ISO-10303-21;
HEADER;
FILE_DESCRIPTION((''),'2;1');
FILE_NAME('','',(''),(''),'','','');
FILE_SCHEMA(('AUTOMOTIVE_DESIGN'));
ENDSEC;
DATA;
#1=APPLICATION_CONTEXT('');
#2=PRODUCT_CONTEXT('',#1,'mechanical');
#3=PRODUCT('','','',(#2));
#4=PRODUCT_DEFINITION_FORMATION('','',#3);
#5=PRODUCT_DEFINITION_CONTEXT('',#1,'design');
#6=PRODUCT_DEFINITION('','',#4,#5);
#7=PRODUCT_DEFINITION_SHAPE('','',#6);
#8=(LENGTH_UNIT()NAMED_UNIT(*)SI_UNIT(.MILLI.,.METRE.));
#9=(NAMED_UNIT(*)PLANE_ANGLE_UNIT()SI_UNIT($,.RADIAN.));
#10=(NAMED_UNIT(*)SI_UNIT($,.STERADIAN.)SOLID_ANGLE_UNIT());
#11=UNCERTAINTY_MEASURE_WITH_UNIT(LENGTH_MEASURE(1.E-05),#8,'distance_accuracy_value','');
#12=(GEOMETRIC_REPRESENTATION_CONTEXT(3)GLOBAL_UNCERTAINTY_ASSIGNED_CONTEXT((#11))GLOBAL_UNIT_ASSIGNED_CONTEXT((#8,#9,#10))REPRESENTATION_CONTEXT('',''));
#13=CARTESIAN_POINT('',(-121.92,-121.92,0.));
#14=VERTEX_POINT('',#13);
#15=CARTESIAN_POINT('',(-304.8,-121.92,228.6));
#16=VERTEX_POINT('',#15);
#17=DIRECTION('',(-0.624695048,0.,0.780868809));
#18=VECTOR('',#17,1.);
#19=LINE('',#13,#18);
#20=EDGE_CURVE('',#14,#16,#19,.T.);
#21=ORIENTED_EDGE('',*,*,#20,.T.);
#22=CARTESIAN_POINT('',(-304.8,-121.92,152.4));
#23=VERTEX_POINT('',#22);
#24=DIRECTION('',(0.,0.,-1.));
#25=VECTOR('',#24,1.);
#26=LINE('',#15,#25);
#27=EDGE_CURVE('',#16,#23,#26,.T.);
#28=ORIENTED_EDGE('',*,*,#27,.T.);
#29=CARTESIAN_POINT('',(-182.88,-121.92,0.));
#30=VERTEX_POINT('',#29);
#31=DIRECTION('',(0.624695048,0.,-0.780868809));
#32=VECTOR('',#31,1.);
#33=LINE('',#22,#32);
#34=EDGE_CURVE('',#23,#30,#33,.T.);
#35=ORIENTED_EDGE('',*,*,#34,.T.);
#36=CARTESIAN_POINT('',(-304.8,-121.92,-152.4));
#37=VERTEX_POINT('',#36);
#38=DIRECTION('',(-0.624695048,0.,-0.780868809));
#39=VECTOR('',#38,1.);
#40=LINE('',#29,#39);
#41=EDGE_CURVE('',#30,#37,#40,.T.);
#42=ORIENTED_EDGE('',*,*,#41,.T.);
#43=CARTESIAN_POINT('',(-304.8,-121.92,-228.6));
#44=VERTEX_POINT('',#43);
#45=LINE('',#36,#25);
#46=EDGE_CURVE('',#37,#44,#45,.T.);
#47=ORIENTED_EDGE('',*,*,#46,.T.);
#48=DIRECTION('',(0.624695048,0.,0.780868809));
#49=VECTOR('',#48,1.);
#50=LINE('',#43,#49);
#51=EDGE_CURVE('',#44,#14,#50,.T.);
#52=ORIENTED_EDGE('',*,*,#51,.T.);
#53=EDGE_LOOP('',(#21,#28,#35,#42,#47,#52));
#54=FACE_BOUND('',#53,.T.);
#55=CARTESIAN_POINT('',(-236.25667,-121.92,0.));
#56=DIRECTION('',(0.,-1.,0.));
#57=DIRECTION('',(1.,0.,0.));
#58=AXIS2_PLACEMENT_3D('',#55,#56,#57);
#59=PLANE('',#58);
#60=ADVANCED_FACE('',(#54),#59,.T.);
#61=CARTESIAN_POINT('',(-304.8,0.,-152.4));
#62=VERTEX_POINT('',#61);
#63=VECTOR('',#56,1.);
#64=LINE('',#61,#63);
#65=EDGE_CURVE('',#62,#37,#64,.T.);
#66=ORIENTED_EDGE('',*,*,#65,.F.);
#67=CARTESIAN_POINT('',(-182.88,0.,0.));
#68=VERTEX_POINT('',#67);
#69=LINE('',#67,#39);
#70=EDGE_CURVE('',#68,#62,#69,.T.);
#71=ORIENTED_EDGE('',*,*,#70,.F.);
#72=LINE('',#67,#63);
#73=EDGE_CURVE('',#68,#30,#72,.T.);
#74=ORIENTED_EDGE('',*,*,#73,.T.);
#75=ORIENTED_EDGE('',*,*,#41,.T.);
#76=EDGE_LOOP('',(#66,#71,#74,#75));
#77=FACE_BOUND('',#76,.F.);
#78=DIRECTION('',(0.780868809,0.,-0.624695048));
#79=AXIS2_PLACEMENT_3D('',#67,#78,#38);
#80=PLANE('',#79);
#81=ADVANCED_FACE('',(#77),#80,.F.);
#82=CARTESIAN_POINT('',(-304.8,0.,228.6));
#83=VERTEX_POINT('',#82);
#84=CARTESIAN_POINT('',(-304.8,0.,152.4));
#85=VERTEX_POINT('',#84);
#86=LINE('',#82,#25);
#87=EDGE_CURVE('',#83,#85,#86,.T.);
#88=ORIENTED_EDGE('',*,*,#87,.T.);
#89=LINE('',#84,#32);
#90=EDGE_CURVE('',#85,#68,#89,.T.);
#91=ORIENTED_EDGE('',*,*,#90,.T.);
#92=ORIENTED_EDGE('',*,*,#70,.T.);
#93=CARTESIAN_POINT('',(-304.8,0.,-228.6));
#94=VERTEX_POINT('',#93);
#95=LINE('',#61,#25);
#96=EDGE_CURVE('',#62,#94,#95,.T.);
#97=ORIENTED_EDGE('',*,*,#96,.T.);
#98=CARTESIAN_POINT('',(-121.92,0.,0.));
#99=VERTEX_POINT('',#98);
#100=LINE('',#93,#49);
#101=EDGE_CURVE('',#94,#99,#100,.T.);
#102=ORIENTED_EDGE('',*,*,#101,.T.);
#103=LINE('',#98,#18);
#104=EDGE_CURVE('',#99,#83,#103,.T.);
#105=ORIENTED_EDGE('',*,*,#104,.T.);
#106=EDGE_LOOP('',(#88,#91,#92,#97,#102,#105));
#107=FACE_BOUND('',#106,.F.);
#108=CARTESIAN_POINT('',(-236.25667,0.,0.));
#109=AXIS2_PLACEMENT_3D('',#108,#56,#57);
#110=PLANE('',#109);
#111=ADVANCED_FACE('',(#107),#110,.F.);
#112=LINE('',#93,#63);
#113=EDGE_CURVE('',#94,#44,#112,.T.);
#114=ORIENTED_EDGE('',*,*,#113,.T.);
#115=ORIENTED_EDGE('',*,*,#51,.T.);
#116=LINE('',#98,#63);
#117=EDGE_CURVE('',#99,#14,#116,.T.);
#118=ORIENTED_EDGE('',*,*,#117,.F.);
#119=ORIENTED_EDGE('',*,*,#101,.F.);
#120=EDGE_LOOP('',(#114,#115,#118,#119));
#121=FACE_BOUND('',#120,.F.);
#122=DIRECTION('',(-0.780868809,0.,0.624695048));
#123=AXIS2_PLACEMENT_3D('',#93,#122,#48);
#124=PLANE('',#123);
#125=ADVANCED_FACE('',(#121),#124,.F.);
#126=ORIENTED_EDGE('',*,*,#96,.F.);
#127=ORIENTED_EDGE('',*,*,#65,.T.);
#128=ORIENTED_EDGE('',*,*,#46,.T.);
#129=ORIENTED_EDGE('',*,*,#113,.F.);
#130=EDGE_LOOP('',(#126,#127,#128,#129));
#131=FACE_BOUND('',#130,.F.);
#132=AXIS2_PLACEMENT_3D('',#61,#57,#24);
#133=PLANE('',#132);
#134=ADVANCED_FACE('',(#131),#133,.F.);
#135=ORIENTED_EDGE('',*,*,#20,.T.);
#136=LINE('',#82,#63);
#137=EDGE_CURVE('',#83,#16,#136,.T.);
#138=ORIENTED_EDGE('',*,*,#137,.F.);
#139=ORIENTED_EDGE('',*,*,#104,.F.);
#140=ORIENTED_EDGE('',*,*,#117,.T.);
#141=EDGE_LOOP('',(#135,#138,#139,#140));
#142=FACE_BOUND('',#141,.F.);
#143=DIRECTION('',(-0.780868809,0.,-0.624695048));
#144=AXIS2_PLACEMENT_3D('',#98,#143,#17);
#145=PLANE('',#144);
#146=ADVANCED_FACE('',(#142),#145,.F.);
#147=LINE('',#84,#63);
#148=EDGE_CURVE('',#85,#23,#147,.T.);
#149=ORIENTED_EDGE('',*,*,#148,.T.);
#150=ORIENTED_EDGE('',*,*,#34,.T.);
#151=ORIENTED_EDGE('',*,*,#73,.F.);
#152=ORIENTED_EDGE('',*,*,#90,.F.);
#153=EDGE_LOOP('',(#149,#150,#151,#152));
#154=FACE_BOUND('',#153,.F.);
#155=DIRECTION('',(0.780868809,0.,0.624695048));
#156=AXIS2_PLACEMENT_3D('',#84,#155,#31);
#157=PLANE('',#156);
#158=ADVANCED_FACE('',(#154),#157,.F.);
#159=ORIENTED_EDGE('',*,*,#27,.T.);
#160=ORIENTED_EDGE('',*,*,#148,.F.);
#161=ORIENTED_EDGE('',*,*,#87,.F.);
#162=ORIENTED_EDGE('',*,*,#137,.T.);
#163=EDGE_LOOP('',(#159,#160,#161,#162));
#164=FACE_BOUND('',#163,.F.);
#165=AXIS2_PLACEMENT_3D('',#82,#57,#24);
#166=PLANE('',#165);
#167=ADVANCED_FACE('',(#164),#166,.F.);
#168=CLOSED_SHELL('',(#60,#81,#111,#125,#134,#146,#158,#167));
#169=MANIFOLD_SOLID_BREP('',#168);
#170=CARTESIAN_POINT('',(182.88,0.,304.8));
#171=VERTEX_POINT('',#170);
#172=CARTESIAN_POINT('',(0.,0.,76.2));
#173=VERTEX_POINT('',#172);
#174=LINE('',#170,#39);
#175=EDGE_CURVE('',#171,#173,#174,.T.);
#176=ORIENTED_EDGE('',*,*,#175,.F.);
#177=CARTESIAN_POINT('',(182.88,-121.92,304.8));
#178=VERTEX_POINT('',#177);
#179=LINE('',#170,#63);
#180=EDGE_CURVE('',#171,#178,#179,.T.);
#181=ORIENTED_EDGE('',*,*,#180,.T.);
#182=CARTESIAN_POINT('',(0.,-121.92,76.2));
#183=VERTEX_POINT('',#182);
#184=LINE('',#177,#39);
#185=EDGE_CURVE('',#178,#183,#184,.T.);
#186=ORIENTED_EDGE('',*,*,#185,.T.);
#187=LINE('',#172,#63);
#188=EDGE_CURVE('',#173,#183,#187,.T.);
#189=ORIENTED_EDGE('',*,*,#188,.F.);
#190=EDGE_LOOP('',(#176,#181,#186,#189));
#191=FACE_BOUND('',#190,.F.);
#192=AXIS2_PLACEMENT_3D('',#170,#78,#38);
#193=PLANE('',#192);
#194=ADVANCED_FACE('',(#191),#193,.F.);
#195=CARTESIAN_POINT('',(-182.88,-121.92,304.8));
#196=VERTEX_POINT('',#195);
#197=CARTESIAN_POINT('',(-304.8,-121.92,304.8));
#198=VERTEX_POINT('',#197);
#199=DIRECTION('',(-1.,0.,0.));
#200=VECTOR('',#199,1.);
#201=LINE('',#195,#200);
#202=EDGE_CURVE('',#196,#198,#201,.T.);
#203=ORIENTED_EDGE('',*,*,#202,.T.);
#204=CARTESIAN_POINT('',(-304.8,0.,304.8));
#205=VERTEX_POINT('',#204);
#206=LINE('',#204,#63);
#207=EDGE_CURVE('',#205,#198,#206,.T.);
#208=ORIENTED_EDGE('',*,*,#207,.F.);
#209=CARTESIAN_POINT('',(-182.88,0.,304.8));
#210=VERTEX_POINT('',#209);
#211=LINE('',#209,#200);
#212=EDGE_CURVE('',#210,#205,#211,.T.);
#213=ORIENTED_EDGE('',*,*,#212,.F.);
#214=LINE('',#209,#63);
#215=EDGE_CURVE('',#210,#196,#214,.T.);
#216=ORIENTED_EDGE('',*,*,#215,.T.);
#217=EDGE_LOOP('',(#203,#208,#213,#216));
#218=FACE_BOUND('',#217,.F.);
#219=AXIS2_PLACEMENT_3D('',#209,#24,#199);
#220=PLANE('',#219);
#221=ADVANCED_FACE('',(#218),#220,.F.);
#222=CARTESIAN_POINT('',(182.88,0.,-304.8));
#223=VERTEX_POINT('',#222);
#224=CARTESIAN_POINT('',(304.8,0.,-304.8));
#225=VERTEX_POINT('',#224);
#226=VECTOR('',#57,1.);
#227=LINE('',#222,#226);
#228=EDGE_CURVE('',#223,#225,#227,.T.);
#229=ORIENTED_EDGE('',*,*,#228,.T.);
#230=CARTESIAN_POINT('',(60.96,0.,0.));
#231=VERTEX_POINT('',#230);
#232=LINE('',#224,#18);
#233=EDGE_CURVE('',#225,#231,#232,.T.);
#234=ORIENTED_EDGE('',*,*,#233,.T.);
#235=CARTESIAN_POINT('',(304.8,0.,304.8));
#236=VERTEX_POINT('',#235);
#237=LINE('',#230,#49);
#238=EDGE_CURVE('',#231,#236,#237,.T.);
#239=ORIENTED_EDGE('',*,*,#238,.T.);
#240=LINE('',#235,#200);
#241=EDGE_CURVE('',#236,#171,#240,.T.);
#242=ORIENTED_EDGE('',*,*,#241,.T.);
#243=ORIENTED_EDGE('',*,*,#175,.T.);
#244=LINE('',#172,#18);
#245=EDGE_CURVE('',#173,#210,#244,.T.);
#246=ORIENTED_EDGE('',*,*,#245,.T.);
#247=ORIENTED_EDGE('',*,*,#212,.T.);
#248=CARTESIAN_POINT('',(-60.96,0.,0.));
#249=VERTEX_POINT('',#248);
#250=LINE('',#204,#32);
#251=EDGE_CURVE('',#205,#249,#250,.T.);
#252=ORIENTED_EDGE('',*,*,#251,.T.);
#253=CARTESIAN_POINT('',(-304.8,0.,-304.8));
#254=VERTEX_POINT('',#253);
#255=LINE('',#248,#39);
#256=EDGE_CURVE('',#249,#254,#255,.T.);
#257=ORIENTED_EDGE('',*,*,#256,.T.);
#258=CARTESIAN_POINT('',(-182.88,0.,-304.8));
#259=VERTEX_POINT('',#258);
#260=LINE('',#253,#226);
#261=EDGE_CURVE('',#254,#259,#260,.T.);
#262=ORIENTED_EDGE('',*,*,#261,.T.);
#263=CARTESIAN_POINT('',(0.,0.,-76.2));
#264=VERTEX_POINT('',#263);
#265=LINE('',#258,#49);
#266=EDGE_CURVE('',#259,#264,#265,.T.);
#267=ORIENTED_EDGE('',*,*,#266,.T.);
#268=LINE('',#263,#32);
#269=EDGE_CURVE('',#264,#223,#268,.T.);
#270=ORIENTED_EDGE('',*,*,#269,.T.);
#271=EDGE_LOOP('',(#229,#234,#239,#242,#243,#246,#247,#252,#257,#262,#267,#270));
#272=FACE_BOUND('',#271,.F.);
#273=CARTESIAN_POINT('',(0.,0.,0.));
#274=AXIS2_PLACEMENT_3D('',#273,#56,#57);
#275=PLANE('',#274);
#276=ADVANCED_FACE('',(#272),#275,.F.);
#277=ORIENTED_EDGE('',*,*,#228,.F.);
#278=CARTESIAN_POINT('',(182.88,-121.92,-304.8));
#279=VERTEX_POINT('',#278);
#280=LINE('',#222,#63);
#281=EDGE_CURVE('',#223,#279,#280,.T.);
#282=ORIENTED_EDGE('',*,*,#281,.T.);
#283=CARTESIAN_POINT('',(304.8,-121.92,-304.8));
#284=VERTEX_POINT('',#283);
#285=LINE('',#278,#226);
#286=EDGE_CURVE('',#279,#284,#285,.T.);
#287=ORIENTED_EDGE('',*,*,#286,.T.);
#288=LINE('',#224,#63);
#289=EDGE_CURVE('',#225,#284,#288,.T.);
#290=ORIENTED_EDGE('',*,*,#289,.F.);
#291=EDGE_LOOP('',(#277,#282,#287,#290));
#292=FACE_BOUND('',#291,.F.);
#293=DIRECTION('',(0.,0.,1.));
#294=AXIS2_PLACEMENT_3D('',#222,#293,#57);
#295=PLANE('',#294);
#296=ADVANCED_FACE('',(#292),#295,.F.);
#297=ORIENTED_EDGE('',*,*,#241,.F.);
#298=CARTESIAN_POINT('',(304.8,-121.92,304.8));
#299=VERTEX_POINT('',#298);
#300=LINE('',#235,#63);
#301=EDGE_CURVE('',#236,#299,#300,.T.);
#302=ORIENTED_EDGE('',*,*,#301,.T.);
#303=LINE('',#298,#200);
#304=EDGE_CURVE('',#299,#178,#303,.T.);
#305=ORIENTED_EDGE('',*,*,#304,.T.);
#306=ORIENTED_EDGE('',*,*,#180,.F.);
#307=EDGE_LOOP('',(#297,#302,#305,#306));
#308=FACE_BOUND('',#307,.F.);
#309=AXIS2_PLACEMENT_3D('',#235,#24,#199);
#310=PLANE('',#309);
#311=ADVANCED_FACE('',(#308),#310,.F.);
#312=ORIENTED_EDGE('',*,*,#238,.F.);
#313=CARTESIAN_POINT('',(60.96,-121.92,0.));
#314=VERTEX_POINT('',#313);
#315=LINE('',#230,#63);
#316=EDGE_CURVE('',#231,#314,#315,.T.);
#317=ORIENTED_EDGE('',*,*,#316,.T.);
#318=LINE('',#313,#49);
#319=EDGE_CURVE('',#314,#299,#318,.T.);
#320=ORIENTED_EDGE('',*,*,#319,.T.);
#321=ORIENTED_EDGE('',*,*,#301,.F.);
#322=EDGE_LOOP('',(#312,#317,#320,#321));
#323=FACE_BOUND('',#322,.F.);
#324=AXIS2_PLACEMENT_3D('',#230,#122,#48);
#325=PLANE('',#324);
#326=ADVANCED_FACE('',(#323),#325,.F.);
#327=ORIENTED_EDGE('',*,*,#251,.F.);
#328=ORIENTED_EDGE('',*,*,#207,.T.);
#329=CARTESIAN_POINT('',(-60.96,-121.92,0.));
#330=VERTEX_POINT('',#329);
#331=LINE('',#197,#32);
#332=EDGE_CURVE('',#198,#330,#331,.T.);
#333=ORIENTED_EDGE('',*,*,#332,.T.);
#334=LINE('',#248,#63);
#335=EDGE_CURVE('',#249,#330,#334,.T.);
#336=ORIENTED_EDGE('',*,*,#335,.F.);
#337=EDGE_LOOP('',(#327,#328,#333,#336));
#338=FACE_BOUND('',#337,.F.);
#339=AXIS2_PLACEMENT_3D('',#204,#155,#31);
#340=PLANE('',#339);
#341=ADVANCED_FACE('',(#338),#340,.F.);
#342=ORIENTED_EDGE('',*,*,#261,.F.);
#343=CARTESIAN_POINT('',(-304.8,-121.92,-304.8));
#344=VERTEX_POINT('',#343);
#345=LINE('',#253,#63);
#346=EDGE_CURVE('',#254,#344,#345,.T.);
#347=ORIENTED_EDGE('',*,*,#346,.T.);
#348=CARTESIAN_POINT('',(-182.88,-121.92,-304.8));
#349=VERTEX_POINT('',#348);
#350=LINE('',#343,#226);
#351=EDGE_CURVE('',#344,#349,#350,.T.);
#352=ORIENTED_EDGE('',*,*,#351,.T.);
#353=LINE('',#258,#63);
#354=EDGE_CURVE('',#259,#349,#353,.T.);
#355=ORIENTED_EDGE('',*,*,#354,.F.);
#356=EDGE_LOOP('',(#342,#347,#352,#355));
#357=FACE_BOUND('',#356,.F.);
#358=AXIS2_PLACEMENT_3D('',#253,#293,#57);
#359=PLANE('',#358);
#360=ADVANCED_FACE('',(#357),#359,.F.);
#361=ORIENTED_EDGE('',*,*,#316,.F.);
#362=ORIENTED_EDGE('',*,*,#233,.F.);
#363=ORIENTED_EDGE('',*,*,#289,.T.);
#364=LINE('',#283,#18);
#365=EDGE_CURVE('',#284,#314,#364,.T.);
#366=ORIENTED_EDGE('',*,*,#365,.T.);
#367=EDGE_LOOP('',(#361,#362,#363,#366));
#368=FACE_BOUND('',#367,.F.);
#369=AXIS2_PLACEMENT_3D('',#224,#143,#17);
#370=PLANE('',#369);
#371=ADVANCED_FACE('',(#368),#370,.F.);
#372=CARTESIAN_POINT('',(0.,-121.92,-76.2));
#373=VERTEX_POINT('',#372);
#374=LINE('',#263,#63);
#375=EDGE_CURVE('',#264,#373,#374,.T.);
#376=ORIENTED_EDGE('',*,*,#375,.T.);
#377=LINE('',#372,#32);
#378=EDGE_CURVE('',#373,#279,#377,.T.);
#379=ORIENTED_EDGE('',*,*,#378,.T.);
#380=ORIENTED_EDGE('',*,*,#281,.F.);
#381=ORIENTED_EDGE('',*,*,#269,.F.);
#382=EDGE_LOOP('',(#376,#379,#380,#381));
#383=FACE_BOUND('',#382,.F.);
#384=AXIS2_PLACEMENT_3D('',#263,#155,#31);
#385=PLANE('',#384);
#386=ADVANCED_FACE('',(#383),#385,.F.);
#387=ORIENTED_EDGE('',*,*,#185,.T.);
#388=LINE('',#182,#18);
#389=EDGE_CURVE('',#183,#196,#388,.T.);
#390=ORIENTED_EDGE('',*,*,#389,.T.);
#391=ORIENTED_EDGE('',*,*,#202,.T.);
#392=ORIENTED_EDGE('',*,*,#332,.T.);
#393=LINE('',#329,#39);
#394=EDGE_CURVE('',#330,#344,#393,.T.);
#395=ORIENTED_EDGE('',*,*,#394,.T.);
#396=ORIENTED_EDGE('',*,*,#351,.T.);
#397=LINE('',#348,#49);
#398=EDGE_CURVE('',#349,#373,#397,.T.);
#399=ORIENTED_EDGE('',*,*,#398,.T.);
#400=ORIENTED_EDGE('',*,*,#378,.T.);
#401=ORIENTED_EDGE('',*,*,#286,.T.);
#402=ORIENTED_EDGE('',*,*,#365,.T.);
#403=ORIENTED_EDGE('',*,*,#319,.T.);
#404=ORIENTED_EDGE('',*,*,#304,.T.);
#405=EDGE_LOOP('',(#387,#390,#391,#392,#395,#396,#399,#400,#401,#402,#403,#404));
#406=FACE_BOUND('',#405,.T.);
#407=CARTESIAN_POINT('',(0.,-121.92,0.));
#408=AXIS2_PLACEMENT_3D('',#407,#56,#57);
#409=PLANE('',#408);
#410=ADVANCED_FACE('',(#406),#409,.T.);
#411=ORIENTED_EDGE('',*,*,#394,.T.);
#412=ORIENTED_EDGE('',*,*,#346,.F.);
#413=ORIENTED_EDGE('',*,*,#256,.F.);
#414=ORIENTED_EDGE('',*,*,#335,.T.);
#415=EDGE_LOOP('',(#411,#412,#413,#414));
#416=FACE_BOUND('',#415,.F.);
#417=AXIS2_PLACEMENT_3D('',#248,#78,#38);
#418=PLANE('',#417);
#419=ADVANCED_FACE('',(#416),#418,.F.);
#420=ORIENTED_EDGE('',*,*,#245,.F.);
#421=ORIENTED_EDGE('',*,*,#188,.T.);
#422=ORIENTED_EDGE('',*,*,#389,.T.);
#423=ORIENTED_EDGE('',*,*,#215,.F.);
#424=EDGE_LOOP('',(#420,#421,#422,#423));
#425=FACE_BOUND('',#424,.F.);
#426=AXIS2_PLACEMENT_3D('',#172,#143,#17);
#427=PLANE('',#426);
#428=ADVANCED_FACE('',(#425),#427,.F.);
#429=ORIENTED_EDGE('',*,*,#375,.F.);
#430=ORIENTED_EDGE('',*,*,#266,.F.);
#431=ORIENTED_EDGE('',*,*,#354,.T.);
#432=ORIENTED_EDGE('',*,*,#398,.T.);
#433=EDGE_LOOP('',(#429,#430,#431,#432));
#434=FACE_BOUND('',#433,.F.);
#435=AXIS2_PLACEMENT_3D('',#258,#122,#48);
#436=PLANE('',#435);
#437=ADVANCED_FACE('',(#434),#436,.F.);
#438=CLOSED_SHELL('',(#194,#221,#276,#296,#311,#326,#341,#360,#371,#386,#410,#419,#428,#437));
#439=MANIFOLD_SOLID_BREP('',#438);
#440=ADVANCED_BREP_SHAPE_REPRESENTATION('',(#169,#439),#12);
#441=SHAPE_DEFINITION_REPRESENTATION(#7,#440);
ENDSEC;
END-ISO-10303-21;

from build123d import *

# Parameters (mm, degrees)
F3_DEPTH = 121.92


# Not quite as in the source:
# - a variable given as a bare number and used for a length is read in inches; the dataset says mm whatever the document's units were


with BuildPart() as f3:
    # F2 (on Front) → F3 (new body)
    with BuildSketch(Plane.XZ):
        Polygon((60.96, 0), (304.8, 304.8), (182.88, 304.8), (0, 76.2), (-182.88, 304.8), (-304.8, 304.8), (-60.96, 0), (-304.8, -304.8), (-182.88, -304.8), (0, -76.2), (182.88, -304.8), (304.8, -304.8), align=None)
    extrude(amount=F3_DEPTH)


with BuildPart() as f3b:
    # F2 (on Front) → F3, piece 2 (new body)
    with BuildSketch(Plane.XZ):
        Polygon((-121.92, 0), (-304.8, 228.6), (-304.8, 152.4), (-182.88, 0), (-304.8, -152.4), (-304.8, -228.6), align=None)
    extrude(amount=F3_DEPTH)


solid = Compound([f3.part, f3b.part])
